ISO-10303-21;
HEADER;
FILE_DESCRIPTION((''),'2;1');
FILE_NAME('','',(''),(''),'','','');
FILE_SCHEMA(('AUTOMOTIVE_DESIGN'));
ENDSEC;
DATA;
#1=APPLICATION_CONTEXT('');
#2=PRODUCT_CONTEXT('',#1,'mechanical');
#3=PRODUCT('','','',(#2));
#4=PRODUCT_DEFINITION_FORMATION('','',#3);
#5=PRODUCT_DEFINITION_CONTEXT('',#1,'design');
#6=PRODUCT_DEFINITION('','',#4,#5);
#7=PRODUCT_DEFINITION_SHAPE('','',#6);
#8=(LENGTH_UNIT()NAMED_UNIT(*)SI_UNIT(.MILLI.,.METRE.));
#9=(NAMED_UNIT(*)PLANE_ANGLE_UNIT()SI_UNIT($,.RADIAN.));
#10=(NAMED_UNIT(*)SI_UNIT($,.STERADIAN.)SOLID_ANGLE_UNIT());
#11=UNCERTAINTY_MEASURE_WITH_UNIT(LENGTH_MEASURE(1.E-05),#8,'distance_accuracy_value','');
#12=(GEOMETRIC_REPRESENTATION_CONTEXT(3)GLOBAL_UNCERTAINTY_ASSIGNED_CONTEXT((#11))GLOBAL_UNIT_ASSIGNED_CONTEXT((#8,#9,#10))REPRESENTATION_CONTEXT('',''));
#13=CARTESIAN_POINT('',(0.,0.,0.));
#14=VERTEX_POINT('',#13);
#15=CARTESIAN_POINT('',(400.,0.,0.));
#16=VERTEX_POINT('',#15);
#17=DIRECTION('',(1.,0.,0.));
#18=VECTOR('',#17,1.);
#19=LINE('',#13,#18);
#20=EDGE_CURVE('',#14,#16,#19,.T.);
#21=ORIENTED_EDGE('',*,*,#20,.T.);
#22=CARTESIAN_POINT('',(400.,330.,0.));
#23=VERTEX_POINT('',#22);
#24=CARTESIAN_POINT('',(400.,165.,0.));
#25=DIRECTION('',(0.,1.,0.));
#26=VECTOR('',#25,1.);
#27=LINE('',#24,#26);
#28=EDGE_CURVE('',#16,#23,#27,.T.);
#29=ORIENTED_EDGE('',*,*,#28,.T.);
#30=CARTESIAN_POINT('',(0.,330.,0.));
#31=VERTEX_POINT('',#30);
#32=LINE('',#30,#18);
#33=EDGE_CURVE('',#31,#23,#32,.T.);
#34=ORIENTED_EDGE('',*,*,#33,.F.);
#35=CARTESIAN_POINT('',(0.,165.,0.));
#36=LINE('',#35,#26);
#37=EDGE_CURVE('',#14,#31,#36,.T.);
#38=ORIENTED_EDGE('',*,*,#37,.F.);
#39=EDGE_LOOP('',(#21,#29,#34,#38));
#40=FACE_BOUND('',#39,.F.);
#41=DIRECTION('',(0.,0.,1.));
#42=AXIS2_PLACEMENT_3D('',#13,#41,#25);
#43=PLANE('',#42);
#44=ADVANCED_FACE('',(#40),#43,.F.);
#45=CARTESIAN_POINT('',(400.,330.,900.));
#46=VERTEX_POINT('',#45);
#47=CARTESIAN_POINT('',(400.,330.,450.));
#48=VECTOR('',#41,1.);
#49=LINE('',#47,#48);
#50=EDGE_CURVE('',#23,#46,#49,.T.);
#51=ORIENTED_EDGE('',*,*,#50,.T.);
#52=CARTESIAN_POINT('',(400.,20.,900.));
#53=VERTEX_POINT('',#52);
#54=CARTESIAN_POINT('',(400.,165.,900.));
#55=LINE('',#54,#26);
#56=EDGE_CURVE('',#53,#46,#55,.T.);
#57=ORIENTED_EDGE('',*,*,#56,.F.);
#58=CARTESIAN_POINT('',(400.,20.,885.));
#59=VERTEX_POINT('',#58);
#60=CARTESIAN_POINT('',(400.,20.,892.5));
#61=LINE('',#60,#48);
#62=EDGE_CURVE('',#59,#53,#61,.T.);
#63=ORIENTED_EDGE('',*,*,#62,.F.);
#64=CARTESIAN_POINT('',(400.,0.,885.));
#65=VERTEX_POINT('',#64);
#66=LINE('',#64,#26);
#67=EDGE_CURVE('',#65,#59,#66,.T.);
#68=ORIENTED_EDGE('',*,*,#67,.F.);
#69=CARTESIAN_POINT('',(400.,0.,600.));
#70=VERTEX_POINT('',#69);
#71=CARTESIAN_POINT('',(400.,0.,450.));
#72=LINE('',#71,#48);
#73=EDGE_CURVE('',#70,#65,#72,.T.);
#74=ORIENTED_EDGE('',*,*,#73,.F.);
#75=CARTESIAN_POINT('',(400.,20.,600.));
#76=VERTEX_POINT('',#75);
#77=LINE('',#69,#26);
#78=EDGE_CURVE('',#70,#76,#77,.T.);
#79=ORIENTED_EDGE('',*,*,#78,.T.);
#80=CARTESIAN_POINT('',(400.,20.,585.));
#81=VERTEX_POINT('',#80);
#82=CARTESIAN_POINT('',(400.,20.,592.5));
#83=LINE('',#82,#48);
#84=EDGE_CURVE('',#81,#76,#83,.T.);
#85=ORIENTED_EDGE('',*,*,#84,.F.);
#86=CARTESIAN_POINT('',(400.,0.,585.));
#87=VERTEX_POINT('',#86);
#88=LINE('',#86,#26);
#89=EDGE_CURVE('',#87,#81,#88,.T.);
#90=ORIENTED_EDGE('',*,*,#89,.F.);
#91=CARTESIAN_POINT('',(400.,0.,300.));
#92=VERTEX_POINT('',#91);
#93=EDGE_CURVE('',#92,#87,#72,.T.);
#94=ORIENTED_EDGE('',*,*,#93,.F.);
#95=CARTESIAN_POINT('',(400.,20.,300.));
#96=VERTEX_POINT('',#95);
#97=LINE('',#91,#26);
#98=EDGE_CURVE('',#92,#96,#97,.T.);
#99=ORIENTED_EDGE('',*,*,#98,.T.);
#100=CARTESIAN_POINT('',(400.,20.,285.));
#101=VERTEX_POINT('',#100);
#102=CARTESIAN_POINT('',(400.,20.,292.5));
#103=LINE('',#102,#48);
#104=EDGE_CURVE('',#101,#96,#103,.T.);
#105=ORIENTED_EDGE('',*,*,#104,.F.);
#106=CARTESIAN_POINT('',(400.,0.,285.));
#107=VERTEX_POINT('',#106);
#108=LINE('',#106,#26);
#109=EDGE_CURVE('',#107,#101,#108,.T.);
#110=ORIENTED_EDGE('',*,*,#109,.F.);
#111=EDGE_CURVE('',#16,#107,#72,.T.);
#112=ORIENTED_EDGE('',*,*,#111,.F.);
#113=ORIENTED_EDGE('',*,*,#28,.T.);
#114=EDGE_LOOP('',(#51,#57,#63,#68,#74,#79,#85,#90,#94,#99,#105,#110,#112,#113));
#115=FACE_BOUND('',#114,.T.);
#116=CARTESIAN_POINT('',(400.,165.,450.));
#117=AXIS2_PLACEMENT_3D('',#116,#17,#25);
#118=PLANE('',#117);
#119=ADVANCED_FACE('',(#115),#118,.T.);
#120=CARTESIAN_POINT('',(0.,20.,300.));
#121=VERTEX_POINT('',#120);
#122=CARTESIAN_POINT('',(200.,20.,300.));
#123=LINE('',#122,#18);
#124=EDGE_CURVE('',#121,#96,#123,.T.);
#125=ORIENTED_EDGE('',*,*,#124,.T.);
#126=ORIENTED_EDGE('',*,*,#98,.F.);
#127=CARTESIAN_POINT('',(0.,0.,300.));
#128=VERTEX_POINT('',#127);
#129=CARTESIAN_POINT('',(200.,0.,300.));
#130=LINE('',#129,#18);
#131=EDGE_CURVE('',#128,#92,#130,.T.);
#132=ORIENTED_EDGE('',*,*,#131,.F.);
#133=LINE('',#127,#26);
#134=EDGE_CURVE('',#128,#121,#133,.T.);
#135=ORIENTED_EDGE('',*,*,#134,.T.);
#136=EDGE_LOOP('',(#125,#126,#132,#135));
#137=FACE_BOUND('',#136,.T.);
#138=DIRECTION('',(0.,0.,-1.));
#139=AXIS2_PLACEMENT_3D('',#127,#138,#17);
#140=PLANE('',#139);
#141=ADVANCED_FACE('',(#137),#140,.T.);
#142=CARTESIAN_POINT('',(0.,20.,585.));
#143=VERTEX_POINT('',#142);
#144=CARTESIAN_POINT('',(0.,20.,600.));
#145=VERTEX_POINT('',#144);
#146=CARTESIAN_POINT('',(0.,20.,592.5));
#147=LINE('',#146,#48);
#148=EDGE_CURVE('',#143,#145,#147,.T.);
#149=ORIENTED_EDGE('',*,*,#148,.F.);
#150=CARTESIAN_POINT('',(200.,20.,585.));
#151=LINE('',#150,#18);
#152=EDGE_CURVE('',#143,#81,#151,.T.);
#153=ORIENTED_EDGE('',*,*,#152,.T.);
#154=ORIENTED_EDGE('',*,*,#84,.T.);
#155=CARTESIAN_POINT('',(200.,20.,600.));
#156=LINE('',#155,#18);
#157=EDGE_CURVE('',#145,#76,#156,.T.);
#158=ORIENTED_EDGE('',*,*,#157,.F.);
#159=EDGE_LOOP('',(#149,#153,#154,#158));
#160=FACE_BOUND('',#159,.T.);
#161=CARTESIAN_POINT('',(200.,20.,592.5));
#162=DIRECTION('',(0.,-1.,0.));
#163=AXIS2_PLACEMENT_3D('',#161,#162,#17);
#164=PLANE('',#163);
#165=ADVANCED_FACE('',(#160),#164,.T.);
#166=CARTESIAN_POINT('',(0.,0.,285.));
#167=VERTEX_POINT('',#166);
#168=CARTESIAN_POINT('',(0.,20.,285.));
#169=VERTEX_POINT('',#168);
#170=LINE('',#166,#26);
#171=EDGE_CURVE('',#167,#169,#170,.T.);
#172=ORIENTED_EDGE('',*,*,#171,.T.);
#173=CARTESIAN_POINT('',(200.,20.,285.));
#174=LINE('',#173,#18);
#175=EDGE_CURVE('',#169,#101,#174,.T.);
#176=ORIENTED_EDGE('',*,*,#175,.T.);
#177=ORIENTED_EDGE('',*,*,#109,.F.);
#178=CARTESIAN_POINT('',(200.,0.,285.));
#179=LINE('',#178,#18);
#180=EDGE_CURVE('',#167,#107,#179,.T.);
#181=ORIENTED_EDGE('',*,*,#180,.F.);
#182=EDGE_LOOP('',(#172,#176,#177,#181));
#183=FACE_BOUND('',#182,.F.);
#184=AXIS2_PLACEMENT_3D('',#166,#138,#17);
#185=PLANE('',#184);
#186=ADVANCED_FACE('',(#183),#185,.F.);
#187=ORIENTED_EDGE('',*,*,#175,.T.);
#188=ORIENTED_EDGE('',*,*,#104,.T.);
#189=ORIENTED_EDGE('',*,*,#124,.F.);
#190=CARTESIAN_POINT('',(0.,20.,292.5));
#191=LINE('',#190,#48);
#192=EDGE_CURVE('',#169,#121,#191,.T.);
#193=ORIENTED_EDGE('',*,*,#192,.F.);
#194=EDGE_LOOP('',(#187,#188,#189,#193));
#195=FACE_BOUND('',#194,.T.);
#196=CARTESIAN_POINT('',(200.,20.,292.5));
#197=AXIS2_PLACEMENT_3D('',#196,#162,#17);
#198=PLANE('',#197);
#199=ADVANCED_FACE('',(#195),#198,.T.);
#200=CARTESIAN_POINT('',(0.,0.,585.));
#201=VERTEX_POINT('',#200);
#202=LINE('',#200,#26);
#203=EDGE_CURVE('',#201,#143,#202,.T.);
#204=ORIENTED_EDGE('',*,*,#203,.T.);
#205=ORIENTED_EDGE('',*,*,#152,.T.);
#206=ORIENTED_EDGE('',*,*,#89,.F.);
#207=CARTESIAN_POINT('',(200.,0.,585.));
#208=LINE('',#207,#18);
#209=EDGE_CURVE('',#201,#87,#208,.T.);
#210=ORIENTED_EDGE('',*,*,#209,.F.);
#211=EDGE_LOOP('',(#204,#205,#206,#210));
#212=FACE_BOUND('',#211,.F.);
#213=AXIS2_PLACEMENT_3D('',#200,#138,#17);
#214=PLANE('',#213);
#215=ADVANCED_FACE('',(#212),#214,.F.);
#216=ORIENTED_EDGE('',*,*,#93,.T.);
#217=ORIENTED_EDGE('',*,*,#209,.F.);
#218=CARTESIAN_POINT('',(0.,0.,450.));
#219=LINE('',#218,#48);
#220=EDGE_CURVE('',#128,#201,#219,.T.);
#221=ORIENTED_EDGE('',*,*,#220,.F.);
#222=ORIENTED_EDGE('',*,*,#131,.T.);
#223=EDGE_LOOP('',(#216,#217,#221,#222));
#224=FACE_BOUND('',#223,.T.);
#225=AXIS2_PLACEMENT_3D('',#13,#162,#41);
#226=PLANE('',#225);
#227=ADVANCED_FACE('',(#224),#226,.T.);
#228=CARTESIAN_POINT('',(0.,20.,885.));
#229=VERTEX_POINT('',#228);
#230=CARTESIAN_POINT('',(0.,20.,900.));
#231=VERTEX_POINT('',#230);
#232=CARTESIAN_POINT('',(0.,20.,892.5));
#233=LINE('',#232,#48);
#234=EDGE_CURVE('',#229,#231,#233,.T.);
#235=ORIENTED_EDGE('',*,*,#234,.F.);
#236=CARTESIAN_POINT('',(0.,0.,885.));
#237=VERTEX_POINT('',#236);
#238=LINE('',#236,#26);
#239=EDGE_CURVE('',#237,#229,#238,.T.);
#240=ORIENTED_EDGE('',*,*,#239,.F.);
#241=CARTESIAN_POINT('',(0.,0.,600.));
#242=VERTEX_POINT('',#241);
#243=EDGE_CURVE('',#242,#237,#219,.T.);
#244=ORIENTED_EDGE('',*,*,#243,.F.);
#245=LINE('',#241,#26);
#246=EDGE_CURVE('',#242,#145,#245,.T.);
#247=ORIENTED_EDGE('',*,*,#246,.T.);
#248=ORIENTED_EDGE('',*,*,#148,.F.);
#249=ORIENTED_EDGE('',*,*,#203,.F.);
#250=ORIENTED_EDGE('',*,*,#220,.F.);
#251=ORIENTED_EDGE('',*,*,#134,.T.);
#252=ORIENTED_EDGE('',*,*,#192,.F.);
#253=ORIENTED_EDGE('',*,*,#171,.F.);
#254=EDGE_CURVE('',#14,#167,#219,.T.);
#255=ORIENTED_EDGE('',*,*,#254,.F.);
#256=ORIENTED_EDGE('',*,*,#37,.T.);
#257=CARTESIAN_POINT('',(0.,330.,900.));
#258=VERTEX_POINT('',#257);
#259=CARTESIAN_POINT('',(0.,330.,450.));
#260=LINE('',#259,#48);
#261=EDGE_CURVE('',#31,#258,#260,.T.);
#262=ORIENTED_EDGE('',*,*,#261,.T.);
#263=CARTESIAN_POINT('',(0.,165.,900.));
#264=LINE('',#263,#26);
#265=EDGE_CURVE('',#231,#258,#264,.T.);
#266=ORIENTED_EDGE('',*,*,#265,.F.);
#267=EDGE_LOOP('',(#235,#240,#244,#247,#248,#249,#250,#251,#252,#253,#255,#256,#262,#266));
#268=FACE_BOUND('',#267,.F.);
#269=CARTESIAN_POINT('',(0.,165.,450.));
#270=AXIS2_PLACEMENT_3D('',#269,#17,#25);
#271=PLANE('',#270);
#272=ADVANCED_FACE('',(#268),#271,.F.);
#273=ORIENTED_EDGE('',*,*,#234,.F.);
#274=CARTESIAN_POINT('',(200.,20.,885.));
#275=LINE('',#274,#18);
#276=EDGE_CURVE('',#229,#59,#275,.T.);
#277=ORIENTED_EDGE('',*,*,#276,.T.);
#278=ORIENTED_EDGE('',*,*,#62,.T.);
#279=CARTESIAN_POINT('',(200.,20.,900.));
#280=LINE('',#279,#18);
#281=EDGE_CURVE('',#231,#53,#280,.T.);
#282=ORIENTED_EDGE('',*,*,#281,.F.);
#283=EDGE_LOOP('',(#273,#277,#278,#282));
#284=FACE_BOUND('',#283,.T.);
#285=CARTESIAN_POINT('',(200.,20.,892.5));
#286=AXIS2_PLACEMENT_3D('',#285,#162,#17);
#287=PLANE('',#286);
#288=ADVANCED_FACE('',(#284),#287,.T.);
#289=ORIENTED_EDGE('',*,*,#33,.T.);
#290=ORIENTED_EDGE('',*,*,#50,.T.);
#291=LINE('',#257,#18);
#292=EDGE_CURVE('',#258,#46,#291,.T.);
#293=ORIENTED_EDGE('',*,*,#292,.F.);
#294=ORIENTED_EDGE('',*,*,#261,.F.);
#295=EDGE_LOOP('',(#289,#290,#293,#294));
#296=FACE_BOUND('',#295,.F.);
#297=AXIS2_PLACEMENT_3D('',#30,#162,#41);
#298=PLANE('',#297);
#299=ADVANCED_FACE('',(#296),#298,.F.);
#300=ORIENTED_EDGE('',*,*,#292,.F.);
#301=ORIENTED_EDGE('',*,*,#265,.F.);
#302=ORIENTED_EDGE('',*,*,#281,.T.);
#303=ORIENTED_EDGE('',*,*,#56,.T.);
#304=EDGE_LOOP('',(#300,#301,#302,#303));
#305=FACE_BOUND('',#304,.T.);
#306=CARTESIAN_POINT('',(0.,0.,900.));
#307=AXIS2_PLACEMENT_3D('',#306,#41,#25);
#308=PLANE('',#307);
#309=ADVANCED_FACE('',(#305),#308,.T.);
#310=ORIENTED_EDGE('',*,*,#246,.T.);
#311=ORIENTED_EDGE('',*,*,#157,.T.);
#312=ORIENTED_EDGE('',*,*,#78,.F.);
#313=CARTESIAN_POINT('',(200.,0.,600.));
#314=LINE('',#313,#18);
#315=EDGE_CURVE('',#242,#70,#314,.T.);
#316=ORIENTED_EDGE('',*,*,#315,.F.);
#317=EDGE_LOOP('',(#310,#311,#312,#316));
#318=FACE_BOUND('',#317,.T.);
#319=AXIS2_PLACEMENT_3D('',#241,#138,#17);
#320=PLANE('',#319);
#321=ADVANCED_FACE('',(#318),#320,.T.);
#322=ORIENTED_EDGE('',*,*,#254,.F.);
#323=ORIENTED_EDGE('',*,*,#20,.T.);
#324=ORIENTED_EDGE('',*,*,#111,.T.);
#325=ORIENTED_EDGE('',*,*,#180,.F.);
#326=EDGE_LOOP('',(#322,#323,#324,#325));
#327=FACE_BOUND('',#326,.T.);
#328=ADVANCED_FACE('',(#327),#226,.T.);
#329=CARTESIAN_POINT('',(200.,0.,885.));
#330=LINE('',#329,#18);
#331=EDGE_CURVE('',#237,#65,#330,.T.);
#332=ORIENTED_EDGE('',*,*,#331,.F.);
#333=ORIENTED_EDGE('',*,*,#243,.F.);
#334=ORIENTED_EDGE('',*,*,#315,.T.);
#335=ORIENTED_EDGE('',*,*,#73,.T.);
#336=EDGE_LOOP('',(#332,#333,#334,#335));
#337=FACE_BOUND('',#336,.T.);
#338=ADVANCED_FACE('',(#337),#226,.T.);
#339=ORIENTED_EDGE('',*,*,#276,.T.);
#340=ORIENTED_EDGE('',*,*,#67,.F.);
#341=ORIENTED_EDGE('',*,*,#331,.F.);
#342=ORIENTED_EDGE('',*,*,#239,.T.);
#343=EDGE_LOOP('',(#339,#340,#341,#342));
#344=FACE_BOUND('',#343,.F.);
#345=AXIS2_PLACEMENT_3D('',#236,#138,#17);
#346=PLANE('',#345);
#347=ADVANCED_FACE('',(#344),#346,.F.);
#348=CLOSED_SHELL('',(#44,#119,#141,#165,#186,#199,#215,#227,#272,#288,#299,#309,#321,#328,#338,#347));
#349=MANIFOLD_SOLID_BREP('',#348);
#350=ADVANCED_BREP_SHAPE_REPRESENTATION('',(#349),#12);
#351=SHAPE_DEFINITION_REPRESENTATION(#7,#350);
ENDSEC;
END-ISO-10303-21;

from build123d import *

# Parameters (mm, degrees)
F0_W     = 330
F0_H     = 900
F1_DEPTH = 400
F2_W     = 400
F2_H     = 15
F3_DEPTH = 20


# Not quite as in the source:
# - a feature names something its author has since deleted; it is built from what else it names


with BuildPart() as f1:
    # F0 (on Right) → F1 (new body)
    with BuildSketch(Plane.YZ):
        with Locations((165, 450)):
            Rectangle(F0_W, F0_H)
    extrude(amount=F1_DEPTH)

    # F2 (on face) → F3 (cut)
    with BuildSketch(Plane.XZ):
        with Locations((200, 892.5)):
            Rectangle(F2_W, F2_H)
        with Locations((200, 592.5)):
            Rectangle(F2_W, F2_H)
        with Locations((200, 292.5)):
            Rectangle(F2_W, F2_H)
    extrude(amount=-F3_DEPTH, mode=Mode.SUBTRACT)


solid = f1.part
